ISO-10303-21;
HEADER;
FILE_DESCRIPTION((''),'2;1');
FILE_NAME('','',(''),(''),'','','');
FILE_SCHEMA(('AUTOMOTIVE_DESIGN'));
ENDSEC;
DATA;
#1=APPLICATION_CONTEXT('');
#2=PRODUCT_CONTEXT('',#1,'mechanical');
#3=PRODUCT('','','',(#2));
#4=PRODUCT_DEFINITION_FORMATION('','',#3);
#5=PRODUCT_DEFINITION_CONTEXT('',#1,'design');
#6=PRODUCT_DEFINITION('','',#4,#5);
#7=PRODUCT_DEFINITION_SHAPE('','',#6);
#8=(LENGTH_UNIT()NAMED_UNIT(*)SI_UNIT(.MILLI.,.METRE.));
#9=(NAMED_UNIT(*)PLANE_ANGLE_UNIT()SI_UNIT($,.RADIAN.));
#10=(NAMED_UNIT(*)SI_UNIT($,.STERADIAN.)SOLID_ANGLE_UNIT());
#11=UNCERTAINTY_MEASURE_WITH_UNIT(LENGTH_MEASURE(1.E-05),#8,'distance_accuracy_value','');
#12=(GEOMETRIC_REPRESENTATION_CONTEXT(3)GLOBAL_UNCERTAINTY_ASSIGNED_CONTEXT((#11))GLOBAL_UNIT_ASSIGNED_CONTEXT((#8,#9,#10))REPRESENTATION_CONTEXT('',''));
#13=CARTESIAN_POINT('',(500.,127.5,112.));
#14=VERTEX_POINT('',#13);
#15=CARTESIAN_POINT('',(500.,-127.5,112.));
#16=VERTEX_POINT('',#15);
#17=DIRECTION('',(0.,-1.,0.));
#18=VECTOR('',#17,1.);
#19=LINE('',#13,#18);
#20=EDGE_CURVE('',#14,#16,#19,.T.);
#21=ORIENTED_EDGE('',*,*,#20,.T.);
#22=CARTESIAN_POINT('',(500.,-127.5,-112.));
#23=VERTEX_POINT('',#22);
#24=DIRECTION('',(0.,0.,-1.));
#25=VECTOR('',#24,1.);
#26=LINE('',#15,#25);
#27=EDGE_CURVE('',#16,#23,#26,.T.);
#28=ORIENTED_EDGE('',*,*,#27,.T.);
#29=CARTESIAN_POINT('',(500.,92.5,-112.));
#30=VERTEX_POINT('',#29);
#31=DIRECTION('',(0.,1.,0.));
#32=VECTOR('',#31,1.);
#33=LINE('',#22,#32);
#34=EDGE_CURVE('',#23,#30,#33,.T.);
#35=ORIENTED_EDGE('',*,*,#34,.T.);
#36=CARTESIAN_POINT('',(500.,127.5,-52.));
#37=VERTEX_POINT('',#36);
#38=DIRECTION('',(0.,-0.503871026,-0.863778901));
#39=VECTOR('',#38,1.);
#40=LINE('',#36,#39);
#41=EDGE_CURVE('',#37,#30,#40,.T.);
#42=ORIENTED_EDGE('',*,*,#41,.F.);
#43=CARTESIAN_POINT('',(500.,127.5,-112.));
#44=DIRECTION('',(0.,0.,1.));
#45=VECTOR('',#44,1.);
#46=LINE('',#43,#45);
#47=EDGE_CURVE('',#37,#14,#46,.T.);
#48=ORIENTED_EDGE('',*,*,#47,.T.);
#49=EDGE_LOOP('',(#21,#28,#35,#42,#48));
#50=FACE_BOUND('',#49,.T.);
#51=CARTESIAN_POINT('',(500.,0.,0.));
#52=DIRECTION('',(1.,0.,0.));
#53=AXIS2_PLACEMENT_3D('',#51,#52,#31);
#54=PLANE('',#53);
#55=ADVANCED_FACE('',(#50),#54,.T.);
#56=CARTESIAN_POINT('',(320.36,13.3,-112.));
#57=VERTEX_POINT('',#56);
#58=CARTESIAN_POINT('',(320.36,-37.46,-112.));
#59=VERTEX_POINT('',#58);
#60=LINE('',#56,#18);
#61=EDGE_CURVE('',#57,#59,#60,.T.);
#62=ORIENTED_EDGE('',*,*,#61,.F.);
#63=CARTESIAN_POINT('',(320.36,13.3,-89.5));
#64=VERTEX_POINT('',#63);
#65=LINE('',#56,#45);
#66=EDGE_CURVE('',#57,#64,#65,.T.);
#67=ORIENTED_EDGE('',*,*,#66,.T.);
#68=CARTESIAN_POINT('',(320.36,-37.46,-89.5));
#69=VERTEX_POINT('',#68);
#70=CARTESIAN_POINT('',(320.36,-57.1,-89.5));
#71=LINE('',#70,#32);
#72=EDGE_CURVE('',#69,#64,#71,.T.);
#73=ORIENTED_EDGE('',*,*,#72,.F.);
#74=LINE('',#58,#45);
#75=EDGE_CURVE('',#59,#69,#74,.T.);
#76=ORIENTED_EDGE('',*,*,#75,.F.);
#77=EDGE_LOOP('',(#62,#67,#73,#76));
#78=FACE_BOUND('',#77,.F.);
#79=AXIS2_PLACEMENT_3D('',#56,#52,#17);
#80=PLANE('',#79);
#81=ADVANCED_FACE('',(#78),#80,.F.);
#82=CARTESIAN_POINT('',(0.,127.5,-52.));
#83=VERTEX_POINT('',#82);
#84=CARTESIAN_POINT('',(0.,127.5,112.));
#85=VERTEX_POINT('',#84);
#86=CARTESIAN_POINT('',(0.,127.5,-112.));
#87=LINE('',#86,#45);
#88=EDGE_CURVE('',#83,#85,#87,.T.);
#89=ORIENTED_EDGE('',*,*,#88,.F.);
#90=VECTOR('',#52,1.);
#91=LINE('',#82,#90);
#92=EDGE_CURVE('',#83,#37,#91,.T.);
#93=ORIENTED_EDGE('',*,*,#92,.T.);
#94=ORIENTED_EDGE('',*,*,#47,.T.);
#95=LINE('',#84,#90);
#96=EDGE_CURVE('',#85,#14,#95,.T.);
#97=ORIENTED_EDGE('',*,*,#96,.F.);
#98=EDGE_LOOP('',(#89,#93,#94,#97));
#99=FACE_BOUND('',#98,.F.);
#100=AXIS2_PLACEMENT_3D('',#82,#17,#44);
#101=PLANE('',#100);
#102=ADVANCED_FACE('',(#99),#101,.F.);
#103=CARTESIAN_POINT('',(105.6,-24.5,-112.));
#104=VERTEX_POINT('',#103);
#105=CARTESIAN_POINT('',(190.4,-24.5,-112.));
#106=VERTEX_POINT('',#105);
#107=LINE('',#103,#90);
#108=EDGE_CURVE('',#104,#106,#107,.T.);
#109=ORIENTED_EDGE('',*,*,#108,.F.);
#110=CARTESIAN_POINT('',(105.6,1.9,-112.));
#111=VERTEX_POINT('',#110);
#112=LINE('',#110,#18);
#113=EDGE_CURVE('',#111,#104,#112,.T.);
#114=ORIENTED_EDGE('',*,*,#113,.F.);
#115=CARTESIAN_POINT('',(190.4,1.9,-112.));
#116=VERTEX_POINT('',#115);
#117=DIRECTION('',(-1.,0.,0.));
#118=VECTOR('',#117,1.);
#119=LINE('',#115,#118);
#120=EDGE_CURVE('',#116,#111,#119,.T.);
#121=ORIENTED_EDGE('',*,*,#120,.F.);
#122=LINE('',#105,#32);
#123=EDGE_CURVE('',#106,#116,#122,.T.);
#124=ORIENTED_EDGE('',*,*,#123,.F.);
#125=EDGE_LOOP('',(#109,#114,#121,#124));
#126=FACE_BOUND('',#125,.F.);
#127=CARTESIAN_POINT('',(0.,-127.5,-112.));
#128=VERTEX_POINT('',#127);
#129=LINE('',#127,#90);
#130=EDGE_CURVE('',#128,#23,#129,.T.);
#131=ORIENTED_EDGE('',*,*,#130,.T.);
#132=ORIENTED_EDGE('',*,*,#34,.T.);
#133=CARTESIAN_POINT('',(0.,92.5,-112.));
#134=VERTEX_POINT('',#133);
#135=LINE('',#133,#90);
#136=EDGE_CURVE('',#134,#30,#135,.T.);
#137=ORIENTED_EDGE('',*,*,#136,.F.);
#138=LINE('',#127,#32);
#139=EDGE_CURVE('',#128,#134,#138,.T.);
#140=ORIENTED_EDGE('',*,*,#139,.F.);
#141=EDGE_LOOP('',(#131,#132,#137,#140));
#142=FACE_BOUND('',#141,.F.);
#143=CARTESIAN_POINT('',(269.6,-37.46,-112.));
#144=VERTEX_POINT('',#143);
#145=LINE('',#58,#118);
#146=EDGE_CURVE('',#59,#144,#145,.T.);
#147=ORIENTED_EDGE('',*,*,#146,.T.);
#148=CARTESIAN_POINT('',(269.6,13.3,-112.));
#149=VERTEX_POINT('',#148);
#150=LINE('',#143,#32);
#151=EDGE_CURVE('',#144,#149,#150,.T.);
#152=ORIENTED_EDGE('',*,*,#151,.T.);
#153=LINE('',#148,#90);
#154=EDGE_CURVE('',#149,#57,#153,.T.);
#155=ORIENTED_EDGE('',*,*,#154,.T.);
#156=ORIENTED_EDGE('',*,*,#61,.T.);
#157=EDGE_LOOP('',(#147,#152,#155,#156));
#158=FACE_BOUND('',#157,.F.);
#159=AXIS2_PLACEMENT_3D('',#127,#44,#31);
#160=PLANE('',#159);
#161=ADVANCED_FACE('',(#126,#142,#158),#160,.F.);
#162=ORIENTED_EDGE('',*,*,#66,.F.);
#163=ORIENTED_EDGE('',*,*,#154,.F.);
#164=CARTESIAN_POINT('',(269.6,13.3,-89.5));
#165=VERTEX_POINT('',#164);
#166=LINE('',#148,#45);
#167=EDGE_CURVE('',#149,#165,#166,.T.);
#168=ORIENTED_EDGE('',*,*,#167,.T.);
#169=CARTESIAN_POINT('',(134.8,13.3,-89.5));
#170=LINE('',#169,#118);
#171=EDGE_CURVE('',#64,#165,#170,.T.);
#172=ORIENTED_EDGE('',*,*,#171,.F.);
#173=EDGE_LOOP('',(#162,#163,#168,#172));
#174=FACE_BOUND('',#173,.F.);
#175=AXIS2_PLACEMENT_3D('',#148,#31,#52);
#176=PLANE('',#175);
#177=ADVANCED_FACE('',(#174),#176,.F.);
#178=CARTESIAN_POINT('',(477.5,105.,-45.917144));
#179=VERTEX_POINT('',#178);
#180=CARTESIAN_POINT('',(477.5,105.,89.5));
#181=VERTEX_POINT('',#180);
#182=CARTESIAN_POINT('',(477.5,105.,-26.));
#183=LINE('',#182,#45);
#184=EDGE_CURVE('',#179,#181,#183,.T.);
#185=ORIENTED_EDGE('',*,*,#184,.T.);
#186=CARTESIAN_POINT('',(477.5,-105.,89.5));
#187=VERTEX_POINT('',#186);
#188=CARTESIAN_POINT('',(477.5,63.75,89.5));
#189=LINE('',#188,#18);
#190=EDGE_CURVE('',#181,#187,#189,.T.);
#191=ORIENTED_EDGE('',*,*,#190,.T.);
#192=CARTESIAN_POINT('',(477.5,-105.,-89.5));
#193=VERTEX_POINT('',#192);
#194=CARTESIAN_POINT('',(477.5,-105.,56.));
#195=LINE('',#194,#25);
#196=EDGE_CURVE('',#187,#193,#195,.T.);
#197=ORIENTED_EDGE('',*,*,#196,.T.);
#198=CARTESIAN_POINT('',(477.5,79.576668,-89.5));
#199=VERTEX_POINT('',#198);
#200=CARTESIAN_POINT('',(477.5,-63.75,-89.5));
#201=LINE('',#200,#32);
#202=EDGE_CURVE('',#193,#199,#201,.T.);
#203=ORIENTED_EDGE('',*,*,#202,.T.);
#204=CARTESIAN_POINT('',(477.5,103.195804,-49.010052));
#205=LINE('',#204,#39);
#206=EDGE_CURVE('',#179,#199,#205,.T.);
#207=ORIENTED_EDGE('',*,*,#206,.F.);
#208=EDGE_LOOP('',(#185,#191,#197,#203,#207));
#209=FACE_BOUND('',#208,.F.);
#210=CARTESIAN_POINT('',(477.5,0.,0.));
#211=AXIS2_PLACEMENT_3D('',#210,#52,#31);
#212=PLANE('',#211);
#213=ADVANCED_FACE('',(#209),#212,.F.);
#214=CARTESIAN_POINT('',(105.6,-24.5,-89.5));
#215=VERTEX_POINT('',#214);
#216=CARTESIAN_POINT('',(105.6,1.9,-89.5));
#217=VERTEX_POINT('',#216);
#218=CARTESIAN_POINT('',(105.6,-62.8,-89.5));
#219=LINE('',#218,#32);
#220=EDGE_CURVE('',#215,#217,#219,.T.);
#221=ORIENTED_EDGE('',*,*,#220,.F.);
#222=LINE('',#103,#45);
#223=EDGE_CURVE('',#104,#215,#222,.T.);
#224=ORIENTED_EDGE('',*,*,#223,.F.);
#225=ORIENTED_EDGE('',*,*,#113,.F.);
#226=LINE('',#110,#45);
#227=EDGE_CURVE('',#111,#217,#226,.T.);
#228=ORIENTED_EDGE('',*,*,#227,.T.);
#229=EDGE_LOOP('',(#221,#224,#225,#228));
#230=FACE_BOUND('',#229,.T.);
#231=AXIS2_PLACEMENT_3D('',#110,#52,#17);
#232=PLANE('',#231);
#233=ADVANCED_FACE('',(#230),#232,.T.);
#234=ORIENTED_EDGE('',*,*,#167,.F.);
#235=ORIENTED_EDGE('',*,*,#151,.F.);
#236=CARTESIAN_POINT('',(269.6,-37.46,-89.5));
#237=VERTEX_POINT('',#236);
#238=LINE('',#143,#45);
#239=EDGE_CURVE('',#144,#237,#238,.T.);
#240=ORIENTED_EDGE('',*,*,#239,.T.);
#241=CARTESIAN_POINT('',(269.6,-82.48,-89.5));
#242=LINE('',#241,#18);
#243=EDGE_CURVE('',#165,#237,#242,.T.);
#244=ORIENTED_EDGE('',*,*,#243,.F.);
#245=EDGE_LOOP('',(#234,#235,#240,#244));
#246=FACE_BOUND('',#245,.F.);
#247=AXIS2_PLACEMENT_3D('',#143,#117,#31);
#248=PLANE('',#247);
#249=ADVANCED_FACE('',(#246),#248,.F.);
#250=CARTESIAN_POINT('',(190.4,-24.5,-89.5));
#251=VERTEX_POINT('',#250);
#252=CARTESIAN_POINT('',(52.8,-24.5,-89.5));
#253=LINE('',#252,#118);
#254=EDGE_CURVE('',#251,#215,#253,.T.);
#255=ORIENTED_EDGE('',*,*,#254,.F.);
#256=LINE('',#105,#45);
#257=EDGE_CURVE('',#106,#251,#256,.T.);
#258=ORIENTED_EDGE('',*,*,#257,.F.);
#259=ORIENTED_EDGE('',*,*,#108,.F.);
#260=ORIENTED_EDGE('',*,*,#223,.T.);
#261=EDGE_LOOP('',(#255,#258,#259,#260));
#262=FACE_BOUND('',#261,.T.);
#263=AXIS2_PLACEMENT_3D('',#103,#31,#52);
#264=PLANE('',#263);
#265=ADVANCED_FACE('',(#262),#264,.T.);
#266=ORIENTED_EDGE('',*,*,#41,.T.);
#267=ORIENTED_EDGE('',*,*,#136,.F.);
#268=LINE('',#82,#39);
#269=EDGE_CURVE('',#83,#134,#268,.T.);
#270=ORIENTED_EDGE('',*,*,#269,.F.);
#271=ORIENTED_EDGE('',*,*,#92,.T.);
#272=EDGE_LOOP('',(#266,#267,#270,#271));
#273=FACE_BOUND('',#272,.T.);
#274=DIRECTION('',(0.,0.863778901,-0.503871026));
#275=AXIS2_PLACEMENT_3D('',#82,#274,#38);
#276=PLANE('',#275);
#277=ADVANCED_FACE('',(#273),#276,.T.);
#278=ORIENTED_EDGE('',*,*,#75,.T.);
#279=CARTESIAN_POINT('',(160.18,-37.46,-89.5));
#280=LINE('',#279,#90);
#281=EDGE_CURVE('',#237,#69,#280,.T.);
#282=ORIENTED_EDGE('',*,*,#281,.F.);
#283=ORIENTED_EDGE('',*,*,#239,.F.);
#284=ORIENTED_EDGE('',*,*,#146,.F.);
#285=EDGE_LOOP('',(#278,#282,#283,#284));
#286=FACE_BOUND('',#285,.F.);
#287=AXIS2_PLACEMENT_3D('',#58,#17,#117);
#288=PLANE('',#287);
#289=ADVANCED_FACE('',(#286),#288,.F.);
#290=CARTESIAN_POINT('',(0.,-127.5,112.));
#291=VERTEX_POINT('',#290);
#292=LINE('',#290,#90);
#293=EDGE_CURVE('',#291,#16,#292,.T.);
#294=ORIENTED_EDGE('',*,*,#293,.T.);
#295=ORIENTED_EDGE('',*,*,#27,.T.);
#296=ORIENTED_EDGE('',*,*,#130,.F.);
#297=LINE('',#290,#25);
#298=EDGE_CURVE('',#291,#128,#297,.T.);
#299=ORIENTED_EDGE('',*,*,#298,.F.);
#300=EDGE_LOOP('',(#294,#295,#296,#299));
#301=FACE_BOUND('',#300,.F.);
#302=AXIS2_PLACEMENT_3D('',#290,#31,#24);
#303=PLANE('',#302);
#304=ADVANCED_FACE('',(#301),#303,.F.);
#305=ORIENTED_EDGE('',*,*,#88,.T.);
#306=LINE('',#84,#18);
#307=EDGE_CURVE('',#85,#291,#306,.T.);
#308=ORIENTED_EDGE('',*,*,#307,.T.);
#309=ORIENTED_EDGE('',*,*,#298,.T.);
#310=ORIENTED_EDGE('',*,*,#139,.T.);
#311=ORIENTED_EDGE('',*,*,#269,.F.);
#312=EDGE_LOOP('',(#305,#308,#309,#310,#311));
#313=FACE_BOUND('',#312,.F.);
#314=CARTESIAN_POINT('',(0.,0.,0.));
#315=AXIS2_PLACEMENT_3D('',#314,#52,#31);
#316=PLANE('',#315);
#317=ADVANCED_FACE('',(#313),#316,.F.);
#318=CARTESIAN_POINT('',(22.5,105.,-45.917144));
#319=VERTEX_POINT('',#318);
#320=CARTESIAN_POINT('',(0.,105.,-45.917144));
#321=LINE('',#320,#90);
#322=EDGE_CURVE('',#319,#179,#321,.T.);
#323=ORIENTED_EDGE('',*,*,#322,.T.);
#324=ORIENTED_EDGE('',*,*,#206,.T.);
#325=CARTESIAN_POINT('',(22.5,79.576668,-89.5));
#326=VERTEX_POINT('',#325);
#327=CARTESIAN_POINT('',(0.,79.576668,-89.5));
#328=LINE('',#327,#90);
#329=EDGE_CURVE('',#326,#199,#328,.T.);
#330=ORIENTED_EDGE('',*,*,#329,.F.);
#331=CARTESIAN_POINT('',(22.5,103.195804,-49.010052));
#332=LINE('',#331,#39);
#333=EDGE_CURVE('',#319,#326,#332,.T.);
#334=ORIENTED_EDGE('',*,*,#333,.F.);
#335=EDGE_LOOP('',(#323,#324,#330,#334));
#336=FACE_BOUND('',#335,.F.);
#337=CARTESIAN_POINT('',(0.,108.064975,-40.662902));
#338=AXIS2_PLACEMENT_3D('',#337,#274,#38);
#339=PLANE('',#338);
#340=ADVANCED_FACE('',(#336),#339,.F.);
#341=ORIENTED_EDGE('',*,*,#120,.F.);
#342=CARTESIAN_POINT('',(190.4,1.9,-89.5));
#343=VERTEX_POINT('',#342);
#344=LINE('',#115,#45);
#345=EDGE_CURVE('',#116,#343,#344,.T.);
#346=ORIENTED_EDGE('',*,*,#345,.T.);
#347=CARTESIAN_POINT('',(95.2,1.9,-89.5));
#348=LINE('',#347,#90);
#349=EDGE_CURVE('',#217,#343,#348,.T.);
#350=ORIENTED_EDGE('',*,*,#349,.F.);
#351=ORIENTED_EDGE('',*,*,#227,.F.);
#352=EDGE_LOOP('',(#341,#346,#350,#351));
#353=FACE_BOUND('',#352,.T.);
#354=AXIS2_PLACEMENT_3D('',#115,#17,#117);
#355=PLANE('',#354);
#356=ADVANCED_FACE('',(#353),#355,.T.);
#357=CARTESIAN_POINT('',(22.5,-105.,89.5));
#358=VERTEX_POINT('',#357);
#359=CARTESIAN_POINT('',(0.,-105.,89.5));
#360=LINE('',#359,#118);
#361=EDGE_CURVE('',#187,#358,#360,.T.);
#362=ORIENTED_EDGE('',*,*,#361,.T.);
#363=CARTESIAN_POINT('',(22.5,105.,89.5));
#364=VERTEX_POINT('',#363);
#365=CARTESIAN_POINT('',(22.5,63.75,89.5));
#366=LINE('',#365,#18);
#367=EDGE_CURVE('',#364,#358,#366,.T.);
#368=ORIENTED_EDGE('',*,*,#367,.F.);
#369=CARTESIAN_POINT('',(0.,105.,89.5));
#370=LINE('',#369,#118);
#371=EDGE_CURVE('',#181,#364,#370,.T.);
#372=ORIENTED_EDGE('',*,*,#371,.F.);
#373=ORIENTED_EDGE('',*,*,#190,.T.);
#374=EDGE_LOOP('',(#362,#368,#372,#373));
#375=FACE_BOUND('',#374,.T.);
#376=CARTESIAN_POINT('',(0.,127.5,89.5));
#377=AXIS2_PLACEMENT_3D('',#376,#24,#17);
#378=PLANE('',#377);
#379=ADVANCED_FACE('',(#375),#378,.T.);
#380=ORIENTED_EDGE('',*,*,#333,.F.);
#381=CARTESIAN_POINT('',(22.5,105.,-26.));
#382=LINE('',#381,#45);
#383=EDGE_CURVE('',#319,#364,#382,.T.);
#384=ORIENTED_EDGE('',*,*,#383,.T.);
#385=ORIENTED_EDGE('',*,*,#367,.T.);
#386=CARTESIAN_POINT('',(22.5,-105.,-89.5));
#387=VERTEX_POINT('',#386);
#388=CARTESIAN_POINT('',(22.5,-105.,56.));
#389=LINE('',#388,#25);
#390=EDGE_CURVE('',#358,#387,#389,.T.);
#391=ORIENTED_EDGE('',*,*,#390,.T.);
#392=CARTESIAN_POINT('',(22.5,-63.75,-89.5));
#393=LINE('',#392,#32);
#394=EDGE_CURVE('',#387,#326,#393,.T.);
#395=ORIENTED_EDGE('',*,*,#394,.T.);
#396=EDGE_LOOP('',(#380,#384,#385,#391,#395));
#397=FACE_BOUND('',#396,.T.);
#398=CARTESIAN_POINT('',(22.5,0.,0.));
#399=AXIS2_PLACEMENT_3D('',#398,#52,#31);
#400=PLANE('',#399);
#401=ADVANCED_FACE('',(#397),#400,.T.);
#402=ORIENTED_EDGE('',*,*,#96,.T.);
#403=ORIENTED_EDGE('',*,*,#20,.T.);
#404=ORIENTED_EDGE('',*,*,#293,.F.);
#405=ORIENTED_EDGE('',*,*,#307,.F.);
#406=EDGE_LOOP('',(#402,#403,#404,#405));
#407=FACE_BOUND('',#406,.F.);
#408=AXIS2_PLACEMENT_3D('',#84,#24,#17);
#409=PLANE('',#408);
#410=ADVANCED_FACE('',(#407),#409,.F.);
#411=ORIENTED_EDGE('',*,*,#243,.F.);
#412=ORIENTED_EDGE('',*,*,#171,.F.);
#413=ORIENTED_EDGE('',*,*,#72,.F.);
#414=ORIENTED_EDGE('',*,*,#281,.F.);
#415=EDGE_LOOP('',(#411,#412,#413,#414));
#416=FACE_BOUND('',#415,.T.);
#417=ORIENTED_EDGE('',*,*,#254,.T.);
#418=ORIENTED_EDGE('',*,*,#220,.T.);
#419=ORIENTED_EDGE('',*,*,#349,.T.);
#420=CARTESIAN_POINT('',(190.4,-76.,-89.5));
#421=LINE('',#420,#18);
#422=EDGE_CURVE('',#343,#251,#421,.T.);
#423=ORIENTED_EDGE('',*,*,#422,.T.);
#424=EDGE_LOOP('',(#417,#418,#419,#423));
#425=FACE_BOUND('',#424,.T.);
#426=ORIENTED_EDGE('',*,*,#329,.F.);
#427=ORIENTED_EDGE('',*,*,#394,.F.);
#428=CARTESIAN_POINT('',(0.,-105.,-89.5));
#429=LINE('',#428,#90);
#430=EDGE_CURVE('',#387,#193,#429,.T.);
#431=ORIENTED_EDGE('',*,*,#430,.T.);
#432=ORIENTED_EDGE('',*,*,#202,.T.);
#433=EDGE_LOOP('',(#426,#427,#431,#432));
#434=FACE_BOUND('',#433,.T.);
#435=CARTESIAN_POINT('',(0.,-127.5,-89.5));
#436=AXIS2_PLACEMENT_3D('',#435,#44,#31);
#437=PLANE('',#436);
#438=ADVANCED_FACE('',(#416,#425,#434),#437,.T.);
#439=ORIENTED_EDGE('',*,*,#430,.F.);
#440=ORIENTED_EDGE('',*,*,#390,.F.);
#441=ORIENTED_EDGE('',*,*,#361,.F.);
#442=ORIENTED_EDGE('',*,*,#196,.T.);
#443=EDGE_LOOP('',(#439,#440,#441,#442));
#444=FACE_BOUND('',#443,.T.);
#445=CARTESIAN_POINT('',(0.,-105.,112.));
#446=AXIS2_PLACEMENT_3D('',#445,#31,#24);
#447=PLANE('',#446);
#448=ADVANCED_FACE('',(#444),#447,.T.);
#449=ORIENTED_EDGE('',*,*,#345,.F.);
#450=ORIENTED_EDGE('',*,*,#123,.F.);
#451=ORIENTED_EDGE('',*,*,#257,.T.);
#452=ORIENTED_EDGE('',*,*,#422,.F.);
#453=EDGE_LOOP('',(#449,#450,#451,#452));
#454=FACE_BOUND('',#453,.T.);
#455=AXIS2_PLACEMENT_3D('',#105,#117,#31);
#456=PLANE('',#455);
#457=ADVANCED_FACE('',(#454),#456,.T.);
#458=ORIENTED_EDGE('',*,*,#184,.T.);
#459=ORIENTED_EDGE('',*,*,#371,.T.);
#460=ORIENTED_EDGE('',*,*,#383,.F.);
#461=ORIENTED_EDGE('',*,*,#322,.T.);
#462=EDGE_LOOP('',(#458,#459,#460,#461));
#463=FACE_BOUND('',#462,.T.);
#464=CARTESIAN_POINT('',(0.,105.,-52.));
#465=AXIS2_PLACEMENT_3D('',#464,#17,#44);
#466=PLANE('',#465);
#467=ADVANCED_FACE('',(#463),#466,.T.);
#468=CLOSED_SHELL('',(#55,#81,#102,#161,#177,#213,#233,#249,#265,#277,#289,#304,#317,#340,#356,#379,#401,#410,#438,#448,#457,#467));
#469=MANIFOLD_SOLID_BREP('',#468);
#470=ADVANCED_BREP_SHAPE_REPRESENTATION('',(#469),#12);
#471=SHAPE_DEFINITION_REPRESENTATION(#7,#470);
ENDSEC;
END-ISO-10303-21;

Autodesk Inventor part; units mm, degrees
ref_plane "YZ Plane" through (0, 0, 0) normal (1, 0, 0) x (0, 1, 0)
ref_plane "XZ Plane" through (0, 0, 0) normal (0, 1, 0) x (-1, 0, 0)
ref_plane "XY Plane" through (0, 0, 0) normal (0, 0, 1) x (1, 0, 0)
sketch "Sketch1" plane through (0, 0, 0) normal (1, 0, 0) x (0, 1, 0)
  point P0 (0, 0)
sketch "Sketch2" plane through (0, 0, 0) normal (1, 0, 0) x (0, 1, 0)
  line L0 (-127.5, -112) -> (127.5, -112)
  line L1 (127.5, -112) -> (127.5, 112)
  line L2 (127.5, 112) -> (-127.5, 112)
  line L3 (-127.5, 112) -> (-127.5, -112)
  line L4 (-127.5, -112) -> (127.5, 112) construction
  line L5 (127.5, -112) -> (-127.5, 112) construction
  line L6 (127.5, -52) -> (92.5, -112)
  point P0 (0, 0)
  dimension "d0" = 255
  dimension "d1" = 224
  dimension "d2" = 35
  dimension "d3" = 60
extrude "Extrusion1" add sketch "Sketch2" along normal blind 500 contours L3 L2 L1 L6 L0
shell "Shell1" thickness 22.5 removed faces 0
ref_plane "Work Plane1" through (0, -127.5, -100.75) normal (0, 0, -1) x (-1, 0, 0)
sketch "Sketch3" plane through (0, -127.5, -112) normal (0, 0, -1) x (-1, 0, 0)
  line L0 (-105.6, 103) -> (-190.4, 103)
  line L1 (-190.4, 103) -> (-190.4, 129.4)
  line L2 (-190.4, 129.4) -> (-105.6, 129.4)
  line L3 (-105.6, 129.4) -> (-105.6, 103)
  point P0 (0, 127.5)
  dimension "d7" = 84.8
  dimension "d8" = 26.4
extrude "Extrusion2" cut sketch "Sketch3" against normal blind 201.5
sketch "Sketch4" plane through (0, -127.5, -112) normal (0, 0, -1) x (-1, 0, 0)
  line L0 (-269.6, 140.8) -> (-320.36, 140.8)
  line L1 (-320.36, 140.8) -> (-320.36, 90.04)
  line L2 (-320.36, 90.04) -> (-269.6, 90.04)
  line L3 (-269.6, 90.04) -> (-269.6, 140.8)
  line L4 (0, 220) -> (-500, 220) projected
  line L5 (-190.4, 103) -> (-190.4, 129.4) projected
  point P0 (0, 127.5)
  dimension "d11" = 50.76
  dimension "d12" = 50.76
  dimension "d13" = 79.2
  dimension "d14" = 79.2
extrude "Extrusion3" cut sketch "Sketch4" against normal blind 201.5
